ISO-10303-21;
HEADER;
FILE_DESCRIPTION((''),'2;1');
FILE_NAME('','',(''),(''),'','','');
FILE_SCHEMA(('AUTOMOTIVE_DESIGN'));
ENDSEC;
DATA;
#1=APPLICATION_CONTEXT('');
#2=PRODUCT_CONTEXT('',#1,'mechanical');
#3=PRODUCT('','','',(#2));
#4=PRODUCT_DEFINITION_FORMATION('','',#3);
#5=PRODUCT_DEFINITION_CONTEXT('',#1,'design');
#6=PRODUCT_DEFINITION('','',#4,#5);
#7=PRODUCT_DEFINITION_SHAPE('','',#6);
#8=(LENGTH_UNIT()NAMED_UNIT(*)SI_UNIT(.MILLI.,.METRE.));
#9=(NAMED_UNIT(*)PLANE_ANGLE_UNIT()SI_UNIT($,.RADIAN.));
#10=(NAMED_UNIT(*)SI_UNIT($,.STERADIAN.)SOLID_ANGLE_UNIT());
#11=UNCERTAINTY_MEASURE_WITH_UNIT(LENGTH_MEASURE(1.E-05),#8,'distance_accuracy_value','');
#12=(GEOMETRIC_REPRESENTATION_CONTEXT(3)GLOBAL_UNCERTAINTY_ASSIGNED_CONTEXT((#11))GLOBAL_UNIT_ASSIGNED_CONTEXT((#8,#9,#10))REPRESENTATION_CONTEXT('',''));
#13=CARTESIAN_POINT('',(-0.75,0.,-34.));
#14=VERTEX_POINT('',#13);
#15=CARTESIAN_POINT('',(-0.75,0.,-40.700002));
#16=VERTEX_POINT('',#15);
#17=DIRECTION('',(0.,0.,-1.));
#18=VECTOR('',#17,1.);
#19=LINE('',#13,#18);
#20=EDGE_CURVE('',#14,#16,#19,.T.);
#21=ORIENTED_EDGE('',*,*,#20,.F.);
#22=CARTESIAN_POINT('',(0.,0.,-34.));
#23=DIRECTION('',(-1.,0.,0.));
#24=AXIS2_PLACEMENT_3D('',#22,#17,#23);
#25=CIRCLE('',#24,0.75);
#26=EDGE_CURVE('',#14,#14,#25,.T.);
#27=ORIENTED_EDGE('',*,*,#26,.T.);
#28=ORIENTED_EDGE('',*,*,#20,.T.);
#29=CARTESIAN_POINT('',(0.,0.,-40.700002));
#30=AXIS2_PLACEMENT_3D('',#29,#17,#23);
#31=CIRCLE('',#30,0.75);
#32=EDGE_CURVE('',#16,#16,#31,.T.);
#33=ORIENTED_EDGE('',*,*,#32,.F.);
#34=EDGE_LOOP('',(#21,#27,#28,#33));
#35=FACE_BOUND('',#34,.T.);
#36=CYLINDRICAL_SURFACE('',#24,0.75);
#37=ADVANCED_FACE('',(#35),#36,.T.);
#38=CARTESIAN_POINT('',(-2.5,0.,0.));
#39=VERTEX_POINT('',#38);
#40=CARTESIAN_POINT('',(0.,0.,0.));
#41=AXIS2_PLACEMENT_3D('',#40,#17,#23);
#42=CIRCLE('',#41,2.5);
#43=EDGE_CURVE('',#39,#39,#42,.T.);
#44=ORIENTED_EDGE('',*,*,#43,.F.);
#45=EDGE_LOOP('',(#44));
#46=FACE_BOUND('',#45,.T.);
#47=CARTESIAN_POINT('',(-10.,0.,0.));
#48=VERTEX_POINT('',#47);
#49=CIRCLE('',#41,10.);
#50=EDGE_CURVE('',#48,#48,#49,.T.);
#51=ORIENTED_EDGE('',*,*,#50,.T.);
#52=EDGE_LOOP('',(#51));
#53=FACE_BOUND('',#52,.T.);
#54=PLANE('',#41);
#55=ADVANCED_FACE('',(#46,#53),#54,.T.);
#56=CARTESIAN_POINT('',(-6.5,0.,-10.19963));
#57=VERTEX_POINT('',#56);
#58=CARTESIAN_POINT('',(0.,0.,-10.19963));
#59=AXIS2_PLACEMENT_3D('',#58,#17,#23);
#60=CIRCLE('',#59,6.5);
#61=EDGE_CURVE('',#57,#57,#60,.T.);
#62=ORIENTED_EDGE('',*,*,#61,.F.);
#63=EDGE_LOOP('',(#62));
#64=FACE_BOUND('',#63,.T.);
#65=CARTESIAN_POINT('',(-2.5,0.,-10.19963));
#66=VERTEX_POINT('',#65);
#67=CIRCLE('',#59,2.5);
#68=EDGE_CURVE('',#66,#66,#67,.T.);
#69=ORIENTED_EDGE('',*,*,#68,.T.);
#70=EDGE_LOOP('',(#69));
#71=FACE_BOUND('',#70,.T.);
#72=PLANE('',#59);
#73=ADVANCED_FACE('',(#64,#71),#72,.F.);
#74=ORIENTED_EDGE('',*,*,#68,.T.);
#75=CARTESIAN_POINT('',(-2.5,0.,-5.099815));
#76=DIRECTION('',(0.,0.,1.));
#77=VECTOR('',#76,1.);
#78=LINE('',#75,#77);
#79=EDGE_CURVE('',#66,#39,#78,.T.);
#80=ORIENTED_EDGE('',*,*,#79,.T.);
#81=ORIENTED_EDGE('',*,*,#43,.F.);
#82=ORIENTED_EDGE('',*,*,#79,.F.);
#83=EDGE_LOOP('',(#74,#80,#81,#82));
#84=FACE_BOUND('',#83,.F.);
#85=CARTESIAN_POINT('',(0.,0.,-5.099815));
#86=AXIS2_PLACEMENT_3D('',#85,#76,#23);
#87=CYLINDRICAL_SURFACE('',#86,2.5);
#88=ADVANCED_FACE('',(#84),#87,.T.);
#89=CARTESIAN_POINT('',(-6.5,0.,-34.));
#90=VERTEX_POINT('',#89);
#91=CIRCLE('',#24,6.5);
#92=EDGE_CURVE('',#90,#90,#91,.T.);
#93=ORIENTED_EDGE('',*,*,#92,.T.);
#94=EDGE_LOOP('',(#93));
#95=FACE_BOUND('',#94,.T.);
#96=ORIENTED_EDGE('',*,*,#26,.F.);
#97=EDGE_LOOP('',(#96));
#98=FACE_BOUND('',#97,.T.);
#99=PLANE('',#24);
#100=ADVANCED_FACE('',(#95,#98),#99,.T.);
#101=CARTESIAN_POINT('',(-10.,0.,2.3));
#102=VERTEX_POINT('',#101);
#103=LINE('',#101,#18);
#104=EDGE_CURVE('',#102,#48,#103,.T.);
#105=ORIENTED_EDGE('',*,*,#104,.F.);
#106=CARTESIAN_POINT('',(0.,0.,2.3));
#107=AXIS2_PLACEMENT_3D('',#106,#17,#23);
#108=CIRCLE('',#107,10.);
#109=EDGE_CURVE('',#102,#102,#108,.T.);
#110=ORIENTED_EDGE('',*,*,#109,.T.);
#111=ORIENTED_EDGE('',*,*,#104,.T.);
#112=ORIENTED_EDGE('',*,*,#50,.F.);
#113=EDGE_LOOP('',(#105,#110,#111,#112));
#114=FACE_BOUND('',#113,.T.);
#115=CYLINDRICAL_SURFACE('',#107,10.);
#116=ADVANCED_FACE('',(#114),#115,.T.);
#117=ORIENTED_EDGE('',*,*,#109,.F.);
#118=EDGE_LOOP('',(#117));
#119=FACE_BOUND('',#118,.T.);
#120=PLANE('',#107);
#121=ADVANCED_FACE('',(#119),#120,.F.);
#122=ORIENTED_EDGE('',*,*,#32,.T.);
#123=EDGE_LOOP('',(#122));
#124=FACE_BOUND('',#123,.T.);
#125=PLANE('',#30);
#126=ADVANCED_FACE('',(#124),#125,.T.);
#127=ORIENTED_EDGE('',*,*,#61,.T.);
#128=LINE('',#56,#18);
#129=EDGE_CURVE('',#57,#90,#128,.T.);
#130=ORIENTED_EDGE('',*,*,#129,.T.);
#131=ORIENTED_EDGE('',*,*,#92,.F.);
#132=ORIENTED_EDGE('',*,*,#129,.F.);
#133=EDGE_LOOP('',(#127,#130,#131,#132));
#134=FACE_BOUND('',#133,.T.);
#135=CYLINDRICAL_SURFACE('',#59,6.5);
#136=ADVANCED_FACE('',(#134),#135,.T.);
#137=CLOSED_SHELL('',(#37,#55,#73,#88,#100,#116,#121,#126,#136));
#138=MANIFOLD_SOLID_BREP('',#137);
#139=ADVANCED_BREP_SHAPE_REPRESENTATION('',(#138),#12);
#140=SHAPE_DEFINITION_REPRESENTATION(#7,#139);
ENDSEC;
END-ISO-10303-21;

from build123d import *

# Parameters (mm, degrees)
F0_W = 2.4999999441
F0_H = 10.1996297166


# Not quite as in the source:
# - ends of sketch curves that miss each other by under 0.0002 mm in the source are joined


with BuildPart() as f1:
    # F0 (on Front) → F1 (revolve)
    with BuildSketch(Plane.XZ):
        Polygon((0, -34.0000009239), (0, -10.1996297166), (-2.4999999441, -10.1996297166), (-6.5000001341, -10.1996297166), (-6.5000001341, -34), (-0.75, -34), align=None)
        with Locations((-1.2499999721, -5.0998148583)):
            Rectangle(F0_W, F0_H)
        Polygon((0, 2.3), (-10, 2.3), (-10, 0), (-2.4999999441, 0), (0, 0), align=None)
        Polygon((0, -40.7000018477), (0, -34.0000009239), (-0.75, -34), (-0.75, -40.7000018477), align=None)
    revolve(axis=Axis((0, 0, -22.5782128982), (0, 0, -1)))


solid = f1.part
